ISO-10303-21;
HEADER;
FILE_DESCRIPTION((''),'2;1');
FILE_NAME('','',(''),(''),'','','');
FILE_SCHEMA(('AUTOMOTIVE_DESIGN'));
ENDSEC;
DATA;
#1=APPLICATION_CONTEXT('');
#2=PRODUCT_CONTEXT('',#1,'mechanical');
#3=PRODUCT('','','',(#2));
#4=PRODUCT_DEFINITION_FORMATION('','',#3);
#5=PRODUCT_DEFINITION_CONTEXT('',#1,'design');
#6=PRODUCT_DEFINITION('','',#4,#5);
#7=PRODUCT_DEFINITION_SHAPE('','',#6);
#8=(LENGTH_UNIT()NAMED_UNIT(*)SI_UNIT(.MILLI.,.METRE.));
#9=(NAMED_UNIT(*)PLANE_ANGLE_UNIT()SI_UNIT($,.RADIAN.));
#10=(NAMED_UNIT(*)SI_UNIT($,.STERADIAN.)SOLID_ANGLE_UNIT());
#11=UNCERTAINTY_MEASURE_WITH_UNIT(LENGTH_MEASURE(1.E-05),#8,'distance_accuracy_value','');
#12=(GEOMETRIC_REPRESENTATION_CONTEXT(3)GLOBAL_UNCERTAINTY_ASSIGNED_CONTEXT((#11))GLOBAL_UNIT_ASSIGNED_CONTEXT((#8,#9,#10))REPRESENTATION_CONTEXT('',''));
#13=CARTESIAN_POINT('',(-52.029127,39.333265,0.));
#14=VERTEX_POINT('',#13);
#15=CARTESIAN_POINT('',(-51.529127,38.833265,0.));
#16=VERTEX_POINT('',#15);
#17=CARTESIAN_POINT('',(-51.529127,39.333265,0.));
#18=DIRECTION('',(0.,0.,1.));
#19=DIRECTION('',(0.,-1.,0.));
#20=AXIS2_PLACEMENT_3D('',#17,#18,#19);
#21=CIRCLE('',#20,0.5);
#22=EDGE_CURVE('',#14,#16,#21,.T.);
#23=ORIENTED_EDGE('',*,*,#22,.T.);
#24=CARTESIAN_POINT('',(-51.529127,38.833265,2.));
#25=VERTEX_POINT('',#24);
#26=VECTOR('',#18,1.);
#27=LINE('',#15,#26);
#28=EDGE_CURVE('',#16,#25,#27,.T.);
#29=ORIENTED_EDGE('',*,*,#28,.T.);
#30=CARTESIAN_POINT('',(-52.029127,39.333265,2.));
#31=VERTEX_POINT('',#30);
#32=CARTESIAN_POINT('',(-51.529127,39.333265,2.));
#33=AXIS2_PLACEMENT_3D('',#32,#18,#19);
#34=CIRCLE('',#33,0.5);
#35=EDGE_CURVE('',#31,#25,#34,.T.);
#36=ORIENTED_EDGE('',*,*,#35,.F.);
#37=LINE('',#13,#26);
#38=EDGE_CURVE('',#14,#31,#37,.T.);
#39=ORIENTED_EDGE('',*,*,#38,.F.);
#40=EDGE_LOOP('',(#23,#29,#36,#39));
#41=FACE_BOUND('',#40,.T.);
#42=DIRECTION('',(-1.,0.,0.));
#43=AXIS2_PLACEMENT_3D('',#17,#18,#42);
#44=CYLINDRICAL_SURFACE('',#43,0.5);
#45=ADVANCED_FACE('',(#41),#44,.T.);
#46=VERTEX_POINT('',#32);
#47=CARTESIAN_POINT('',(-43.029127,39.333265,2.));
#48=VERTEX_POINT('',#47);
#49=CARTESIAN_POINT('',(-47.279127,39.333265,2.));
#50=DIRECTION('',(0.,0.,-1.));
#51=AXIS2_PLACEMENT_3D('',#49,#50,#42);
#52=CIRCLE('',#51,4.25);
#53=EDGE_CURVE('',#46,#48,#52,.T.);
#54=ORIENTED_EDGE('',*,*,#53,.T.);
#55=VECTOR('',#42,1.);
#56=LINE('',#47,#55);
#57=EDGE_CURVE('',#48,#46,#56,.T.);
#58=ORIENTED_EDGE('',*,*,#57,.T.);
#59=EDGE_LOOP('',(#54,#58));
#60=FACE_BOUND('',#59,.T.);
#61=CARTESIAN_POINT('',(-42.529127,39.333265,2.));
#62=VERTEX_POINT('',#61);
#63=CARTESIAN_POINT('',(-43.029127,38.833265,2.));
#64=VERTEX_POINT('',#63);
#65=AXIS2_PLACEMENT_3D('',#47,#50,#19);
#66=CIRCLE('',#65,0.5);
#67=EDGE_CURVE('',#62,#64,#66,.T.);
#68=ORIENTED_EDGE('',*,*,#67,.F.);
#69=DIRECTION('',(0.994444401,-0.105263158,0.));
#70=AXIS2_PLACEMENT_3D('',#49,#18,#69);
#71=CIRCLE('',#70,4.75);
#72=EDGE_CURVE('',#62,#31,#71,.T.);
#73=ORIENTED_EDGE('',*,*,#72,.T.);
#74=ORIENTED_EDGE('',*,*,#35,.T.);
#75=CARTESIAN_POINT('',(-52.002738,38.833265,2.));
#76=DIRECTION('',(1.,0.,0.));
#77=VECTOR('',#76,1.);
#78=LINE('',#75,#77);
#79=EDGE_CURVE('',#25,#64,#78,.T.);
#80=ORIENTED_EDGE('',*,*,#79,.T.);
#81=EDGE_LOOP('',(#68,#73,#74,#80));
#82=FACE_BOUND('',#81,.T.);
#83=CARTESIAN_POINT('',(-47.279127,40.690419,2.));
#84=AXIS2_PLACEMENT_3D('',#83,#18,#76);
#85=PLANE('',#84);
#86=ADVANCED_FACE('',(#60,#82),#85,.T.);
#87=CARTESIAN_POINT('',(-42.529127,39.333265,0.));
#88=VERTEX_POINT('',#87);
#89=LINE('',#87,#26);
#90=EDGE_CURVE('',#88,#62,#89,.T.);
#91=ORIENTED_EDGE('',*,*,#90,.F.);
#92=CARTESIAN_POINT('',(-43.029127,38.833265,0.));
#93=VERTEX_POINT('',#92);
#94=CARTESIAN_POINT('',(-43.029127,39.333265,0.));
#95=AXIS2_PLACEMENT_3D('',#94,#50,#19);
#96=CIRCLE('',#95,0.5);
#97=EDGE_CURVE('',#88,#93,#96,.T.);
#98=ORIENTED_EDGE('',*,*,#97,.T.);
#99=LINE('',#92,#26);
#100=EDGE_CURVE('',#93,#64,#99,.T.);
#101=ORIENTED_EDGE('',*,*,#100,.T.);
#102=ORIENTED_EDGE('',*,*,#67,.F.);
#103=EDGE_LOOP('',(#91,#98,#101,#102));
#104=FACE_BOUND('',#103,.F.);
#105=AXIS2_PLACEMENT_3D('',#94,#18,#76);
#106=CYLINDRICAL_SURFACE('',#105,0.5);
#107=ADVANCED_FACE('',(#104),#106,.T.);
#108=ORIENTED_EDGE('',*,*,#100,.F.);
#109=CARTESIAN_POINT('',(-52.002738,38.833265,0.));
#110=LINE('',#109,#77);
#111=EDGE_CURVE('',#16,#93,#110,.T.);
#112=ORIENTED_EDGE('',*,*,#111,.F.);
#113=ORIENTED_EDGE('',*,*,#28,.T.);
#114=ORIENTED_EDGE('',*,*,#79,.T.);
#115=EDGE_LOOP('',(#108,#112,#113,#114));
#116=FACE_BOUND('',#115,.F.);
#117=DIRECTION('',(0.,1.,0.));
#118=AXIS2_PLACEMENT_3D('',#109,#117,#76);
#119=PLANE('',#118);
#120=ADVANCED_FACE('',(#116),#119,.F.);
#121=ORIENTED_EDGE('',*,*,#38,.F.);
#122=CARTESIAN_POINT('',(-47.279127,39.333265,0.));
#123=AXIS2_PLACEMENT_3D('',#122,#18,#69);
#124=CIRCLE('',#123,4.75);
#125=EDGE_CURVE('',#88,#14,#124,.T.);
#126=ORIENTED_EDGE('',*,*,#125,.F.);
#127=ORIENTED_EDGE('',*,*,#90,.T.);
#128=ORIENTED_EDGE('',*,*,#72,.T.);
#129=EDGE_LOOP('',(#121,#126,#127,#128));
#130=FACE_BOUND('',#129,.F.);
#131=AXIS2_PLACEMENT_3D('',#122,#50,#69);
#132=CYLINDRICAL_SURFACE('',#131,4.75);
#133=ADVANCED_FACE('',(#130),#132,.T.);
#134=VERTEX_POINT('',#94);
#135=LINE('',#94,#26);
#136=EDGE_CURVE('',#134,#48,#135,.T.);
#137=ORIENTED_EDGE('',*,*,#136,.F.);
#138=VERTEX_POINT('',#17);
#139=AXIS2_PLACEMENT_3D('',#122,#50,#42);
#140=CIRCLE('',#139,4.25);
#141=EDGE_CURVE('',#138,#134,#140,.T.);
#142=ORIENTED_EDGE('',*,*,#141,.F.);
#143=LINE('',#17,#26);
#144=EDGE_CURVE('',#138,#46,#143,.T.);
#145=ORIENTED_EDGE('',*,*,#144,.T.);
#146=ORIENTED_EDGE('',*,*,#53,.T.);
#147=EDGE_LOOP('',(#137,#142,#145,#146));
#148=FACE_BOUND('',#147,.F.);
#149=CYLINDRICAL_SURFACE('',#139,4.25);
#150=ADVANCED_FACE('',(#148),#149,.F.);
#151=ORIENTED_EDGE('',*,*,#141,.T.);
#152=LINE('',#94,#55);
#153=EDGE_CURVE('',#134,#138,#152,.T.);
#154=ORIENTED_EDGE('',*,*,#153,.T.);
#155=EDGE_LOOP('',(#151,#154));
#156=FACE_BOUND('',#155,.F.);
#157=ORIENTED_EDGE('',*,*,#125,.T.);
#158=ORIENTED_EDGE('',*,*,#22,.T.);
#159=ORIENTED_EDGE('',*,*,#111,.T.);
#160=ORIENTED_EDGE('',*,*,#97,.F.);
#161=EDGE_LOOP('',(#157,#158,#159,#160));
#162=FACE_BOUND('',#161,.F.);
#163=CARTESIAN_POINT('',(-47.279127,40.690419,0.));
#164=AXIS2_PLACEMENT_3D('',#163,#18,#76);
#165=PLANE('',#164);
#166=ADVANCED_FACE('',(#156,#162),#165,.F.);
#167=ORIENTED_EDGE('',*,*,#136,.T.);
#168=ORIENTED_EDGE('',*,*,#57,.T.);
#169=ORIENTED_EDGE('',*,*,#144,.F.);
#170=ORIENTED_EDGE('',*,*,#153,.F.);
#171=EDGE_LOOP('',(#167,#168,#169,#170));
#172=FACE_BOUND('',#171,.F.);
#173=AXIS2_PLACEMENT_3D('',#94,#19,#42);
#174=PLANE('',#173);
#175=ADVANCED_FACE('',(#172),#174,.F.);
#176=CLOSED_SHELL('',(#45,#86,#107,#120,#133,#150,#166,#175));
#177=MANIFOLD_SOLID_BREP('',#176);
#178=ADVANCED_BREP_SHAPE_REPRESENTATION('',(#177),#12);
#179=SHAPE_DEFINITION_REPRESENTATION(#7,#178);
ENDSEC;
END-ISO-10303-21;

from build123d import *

# Parameters (mm, degrees)
F1_DEPTH = 2
F2_R     = 0.5


with BuildPart() as f1:
    # F0 (on Top) → F1 (new body)
    with BuildSketch(Plane.XY):
        with BuildLine():
            ThreePointArc((-42.5555160352, 38.8332652748), (-47.2791269422, 44.0832652748), (-52.0027378491, 38.8332652748))
            Line((-52.0027378491, 38.8332652748), (-42.5555160352, 38.8332652748))
        make_face()
        with BuildLine():
            ThreePointArc((-51.5291269422, 39.3332652748), (-47.2791269422, 43.5832652748), (-43.0291269422, 39.3332652748))
            Line((-43.0291269422, 39.3332652748), (-51.5291269422, 39.3332652748))
        make_face(mode=Mode.SUBTRACT)
    extrude(amount=F1_DEPTH)

    # F2
    f2_edges = [f1.edges().sort_by_distance(p)[0] for p in [
        (-52.002738, 38.833265, 1),
        (-42.555516, 38.833265, 1),
    ]]
    fillet(f2_edges, radius=F2_R)


solid = f1.part
